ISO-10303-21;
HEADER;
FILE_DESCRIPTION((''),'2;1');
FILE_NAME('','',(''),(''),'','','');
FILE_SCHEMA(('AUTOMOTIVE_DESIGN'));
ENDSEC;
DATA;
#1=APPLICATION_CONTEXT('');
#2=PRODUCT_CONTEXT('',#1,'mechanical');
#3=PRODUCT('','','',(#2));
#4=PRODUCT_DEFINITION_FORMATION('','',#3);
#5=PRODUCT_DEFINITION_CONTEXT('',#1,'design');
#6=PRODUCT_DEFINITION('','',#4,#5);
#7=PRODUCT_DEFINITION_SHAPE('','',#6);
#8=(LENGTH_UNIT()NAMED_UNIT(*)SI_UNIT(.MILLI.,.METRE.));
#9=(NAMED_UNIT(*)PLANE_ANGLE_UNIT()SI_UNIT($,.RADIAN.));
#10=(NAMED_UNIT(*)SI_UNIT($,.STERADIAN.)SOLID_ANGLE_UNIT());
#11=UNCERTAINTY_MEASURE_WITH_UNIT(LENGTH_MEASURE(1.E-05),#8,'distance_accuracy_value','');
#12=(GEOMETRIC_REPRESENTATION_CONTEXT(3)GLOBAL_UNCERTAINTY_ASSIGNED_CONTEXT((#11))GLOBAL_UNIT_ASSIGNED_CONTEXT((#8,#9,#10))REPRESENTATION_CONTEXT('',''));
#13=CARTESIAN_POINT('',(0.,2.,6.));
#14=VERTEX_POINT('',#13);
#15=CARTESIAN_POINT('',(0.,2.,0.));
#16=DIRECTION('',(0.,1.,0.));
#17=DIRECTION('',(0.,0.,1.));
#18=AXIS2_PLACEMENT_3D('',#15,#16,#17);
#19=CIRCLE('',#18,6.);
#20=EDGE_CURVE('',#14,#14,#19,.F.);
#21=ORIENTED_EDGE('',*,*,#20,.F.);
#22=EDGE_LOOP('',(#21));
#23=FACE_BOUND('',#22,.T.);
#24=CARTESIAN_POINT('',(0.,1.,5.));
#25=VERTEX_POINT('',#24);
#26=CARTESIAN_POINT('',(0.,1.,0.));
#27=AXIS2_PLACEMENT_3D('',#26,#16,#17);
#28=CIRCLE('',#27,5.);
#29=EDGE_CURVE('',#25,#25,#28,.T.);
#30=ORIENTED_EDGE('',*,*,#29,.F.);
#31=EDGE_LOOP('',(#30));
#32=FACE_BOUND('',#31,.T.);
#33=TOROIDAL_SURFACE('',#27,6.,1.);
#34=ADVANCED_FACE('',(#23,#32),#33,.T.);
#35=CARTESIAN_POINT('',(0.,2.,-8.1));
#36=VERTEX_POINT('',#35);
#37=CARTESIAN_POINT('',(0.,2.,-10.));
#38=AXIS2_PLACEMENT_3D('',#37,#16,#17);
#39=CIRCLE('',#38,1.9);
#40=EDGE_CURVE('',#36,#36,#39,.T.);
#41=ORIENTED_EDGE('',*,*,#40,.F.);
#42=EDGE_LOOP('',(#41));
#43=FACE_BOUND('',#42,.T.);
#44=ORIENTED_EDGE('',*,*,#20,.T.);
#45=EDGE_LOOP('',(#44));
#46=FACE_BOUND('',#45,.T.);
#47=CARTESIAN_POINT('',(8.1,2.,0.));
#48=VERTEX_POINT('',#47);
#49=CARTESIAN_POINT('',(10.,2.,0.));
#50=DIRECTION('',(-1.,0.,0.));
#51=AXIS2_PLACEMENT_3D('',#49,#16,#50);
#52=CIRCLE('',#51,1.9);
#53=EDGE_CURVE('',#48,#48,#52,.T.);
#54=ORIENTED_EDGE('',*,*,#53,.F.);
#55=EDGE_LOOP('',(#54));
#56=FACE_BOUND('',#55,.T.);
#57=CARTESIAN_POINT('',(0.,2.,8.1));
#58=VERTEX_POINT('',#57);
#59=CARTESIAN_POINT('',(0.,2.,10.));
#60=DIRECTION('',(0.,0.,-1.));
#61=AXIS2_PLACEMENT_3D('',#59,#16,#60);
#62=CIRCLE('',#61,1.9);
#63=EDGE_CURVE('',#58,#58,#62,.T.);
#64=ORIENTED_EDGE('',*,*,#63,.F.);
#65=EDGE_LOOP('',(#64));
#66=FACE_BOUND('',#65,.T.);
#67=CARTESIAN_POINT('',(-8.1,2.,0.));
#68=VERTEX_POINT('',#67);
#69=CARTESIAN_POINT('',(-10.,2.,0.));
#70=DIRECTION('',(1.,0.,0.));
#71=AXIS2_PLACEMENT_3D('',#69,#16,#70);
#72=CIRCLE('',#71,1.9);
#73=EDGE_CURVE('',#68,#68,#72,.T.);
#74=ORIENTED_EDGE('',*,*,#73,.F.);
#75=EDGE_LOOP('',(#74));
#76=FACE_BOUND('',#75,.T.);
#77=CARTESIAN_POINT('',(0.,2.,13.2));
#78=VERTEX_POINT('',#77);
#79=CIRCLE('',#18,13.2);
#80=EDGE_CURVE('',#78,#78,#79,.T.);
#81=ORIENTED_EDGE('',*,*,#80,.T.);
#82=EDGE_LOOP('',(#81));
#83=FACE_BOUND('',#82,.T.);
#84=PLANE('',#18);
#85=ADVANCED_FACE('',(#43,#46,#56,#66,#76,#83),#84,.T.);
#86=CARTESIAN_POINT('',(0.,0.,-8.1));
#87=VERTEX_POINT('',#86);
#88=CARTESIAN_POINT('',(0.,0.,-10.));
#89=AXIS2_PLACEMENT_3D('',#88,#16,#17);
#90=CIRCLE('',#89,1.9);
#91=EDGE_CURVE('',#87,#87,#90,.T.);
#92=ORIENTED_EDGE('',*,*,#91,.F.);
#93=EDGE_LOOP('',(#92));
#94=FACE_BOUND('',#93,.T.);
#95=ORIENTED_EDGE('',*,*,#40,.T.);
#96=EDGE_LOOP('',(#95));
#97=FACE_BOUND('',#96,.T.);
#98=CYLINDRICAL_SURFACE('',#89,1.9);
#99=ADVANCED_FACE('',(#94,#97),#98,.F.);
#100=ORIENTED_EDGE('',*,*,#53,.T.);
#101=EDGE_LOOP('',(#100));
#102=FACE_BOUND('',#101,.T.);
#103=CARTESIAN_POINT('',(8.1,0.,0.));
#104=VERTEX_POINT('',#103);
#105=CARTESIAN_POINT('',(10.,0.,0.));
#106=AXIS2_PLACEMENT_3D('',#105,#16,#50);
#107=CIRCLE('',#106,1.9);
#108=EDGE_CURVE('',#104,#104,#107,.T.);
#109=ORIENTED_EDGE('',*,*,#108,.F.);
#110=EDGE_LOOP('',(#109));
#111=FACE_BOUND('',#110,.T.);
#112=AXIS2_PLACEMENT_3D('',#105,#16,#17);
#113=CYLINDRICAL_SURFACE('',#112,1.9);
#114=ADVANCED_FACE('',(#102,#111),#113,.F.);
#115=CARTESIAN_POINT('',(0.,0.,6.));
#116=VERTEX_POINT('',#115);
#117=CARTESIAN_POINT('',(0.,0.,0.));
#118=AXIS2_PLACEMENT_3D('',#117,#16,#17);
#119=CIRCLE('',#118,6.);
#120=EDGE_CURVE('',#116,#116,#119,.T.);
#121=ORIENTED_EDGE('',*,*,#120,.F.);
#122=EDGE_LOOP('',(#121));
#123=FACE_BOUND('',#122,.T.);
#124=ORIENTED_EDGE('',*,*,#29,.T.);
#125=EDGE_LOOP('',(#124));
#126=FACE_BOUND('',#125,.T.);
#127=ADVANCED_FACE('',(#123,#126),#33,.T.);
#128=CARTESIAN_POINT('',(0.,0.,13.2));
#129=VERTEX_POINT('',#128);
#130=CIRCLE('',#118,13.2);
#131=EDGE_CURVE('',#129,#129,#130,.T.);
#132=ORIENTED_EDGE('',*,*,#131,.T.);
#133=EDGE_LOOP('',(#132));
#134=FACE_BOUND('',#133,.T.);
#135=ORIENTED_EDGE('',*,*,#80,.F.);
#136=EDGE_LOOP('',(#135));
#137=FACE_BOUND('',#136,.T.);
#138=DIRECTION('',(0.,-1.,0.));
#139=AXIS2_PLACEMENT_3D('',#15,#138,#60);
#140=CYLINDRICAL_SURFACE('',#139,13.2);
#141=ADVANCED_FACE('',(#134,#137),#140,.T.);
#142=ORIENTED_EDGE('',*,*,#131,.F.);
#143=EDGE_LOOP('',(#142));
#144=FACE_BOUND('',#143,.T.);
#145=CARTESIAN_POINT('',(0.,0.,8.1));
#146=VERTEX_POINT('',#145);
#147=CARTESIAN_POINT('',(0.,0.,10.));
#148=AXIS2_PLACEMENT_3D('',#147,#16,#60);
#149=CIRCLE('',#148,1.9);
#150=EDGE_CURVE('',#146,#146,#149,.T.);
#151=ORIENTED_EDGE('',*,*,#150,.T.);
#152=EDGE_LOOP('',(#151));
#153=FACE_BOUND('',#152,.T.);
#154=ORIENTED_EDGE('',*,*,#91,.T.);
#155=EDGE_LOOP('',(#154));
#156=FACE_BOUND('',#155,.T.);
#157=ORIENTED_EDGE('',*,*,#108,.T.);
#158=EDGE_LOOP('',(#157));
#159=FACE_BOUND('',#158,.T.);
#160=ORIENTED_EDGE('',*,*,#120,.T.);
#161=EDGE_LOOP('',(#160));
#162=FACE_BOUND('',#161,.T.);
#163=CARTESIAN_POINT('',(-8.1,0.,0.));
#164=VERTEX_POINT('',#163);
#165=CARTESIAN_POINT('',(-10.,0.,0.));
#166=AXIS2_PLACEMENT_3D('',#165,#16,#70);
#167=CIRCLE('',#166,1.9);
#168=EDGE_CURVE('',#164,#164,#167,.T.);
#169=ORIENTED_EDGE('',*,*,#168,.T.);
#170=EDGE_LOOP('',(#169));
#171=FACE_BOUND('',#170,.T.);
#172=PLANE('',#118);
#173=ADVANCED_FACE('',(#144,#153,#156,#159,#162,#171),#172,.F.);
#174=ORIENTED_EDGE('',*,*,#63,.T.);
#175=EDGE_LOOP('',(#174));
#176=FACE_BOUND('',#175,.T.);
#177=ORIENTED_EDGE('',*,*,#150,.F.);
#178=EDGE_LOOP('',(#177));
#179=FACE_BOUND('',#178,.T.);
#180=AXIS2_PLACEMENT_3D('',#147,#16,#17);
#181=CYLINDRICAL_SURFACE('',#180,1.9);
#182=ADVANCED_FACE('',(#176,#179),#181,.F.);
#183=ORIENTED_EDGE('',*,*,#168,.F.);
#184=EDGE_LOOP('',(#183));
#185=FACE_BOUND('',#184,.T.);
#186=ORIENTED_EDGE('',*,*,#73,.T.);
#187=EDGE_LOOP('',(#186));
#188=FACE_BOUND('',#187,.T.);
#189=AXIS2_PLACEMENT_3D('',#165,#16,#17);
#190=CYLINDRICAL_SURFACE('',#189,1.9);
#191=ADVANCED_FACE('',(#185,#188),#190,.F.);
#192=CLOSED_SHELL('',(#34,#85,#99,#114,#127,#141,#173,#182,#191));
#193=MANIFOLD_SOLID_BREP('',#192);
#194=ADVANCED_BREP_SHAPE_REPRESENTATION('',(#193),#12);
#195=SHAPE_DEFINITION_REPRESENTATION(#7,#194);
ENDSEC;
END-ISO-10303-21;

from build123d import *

# Parameters (mm, degrees)
SKETCH2_R           = 13.2
BOSS_EXTRUDE1_DEPTH = 2
SKETCH3_R           = 1.9
CUT_EXTRUDE1_DEPTH  = 2
SKETCH4_R           = 5
CUT_EXTRUDE2_DEPTH  = 2
CIRPATTERN1_COUNT   = 4
FILLET2_R           = 1


with BuildPart() as part:
    # Sketch2 → Boss-Extrude1 (new body)
    with BuildSketch(Plane(origin=(0, 0, 0), x_dir=(1, 0, 0), z_dir=(0, 1, 0))):
        with Locations(Location((0, 0, 0), (0, 0, 270))):
            Circle(SKETCH2_R)
    extrude(amount=BOSS_EXTRUDE1_DEPTH)

    # Sketch3 → Cut-Extrude1 (cut)
    with BuildSketch(Plane(origin=(0, 2, 0), x_dir=(1, 0, 0), z_dir=(0, 1, 0))):
        with Locations(Location((0, 10, 0), (0, 0, 270))):
            Circle(SKETCH3_R)
    cut_extrude1 = extrude(amount=-CUT_EXTRUDE1_DEPTH, mode=Mode.SUBTRACT)

    # Sketch4 → Cut-Extrude2 (cut)
    with BuildSketch(Plane(origin=(0, 2, 0), x_dir=(1, 0, 0), z_dir=(0, 1, 0))):
        with Locations(Location((0, 0, 0), (0, 0, 270))):
            Circle(SKETCH4_R)
    extrude(amount=-CUT_EXTRUDE2_DEPTH, mode=Mode.SUBTRACT)

    # CirPattern1: Cut-Extrude1 ×4 about axis
    cirpattern1_axis = Axis((0, 0, 0), (0, 1, 0))
    for i in range(1, CIRPATTERN1_COUNT):
        add(cut_extrude1.rotate(cirpattern1_axis, i * 360 / CIRPATTERN1_COUNT), mode=Mode.SUBTRACT)

    # Fillet2
    fillet2_edges = [part.edges().sort_by_distance(p)[0] for p in [
        (0, 0, -5),
        (0, 2, -5),
    ]]
    fillet(fillet2_edges, radius=FILLET2_R - 0.0001)  # a hair under: the kernel refuses the full size


solid = part.part
